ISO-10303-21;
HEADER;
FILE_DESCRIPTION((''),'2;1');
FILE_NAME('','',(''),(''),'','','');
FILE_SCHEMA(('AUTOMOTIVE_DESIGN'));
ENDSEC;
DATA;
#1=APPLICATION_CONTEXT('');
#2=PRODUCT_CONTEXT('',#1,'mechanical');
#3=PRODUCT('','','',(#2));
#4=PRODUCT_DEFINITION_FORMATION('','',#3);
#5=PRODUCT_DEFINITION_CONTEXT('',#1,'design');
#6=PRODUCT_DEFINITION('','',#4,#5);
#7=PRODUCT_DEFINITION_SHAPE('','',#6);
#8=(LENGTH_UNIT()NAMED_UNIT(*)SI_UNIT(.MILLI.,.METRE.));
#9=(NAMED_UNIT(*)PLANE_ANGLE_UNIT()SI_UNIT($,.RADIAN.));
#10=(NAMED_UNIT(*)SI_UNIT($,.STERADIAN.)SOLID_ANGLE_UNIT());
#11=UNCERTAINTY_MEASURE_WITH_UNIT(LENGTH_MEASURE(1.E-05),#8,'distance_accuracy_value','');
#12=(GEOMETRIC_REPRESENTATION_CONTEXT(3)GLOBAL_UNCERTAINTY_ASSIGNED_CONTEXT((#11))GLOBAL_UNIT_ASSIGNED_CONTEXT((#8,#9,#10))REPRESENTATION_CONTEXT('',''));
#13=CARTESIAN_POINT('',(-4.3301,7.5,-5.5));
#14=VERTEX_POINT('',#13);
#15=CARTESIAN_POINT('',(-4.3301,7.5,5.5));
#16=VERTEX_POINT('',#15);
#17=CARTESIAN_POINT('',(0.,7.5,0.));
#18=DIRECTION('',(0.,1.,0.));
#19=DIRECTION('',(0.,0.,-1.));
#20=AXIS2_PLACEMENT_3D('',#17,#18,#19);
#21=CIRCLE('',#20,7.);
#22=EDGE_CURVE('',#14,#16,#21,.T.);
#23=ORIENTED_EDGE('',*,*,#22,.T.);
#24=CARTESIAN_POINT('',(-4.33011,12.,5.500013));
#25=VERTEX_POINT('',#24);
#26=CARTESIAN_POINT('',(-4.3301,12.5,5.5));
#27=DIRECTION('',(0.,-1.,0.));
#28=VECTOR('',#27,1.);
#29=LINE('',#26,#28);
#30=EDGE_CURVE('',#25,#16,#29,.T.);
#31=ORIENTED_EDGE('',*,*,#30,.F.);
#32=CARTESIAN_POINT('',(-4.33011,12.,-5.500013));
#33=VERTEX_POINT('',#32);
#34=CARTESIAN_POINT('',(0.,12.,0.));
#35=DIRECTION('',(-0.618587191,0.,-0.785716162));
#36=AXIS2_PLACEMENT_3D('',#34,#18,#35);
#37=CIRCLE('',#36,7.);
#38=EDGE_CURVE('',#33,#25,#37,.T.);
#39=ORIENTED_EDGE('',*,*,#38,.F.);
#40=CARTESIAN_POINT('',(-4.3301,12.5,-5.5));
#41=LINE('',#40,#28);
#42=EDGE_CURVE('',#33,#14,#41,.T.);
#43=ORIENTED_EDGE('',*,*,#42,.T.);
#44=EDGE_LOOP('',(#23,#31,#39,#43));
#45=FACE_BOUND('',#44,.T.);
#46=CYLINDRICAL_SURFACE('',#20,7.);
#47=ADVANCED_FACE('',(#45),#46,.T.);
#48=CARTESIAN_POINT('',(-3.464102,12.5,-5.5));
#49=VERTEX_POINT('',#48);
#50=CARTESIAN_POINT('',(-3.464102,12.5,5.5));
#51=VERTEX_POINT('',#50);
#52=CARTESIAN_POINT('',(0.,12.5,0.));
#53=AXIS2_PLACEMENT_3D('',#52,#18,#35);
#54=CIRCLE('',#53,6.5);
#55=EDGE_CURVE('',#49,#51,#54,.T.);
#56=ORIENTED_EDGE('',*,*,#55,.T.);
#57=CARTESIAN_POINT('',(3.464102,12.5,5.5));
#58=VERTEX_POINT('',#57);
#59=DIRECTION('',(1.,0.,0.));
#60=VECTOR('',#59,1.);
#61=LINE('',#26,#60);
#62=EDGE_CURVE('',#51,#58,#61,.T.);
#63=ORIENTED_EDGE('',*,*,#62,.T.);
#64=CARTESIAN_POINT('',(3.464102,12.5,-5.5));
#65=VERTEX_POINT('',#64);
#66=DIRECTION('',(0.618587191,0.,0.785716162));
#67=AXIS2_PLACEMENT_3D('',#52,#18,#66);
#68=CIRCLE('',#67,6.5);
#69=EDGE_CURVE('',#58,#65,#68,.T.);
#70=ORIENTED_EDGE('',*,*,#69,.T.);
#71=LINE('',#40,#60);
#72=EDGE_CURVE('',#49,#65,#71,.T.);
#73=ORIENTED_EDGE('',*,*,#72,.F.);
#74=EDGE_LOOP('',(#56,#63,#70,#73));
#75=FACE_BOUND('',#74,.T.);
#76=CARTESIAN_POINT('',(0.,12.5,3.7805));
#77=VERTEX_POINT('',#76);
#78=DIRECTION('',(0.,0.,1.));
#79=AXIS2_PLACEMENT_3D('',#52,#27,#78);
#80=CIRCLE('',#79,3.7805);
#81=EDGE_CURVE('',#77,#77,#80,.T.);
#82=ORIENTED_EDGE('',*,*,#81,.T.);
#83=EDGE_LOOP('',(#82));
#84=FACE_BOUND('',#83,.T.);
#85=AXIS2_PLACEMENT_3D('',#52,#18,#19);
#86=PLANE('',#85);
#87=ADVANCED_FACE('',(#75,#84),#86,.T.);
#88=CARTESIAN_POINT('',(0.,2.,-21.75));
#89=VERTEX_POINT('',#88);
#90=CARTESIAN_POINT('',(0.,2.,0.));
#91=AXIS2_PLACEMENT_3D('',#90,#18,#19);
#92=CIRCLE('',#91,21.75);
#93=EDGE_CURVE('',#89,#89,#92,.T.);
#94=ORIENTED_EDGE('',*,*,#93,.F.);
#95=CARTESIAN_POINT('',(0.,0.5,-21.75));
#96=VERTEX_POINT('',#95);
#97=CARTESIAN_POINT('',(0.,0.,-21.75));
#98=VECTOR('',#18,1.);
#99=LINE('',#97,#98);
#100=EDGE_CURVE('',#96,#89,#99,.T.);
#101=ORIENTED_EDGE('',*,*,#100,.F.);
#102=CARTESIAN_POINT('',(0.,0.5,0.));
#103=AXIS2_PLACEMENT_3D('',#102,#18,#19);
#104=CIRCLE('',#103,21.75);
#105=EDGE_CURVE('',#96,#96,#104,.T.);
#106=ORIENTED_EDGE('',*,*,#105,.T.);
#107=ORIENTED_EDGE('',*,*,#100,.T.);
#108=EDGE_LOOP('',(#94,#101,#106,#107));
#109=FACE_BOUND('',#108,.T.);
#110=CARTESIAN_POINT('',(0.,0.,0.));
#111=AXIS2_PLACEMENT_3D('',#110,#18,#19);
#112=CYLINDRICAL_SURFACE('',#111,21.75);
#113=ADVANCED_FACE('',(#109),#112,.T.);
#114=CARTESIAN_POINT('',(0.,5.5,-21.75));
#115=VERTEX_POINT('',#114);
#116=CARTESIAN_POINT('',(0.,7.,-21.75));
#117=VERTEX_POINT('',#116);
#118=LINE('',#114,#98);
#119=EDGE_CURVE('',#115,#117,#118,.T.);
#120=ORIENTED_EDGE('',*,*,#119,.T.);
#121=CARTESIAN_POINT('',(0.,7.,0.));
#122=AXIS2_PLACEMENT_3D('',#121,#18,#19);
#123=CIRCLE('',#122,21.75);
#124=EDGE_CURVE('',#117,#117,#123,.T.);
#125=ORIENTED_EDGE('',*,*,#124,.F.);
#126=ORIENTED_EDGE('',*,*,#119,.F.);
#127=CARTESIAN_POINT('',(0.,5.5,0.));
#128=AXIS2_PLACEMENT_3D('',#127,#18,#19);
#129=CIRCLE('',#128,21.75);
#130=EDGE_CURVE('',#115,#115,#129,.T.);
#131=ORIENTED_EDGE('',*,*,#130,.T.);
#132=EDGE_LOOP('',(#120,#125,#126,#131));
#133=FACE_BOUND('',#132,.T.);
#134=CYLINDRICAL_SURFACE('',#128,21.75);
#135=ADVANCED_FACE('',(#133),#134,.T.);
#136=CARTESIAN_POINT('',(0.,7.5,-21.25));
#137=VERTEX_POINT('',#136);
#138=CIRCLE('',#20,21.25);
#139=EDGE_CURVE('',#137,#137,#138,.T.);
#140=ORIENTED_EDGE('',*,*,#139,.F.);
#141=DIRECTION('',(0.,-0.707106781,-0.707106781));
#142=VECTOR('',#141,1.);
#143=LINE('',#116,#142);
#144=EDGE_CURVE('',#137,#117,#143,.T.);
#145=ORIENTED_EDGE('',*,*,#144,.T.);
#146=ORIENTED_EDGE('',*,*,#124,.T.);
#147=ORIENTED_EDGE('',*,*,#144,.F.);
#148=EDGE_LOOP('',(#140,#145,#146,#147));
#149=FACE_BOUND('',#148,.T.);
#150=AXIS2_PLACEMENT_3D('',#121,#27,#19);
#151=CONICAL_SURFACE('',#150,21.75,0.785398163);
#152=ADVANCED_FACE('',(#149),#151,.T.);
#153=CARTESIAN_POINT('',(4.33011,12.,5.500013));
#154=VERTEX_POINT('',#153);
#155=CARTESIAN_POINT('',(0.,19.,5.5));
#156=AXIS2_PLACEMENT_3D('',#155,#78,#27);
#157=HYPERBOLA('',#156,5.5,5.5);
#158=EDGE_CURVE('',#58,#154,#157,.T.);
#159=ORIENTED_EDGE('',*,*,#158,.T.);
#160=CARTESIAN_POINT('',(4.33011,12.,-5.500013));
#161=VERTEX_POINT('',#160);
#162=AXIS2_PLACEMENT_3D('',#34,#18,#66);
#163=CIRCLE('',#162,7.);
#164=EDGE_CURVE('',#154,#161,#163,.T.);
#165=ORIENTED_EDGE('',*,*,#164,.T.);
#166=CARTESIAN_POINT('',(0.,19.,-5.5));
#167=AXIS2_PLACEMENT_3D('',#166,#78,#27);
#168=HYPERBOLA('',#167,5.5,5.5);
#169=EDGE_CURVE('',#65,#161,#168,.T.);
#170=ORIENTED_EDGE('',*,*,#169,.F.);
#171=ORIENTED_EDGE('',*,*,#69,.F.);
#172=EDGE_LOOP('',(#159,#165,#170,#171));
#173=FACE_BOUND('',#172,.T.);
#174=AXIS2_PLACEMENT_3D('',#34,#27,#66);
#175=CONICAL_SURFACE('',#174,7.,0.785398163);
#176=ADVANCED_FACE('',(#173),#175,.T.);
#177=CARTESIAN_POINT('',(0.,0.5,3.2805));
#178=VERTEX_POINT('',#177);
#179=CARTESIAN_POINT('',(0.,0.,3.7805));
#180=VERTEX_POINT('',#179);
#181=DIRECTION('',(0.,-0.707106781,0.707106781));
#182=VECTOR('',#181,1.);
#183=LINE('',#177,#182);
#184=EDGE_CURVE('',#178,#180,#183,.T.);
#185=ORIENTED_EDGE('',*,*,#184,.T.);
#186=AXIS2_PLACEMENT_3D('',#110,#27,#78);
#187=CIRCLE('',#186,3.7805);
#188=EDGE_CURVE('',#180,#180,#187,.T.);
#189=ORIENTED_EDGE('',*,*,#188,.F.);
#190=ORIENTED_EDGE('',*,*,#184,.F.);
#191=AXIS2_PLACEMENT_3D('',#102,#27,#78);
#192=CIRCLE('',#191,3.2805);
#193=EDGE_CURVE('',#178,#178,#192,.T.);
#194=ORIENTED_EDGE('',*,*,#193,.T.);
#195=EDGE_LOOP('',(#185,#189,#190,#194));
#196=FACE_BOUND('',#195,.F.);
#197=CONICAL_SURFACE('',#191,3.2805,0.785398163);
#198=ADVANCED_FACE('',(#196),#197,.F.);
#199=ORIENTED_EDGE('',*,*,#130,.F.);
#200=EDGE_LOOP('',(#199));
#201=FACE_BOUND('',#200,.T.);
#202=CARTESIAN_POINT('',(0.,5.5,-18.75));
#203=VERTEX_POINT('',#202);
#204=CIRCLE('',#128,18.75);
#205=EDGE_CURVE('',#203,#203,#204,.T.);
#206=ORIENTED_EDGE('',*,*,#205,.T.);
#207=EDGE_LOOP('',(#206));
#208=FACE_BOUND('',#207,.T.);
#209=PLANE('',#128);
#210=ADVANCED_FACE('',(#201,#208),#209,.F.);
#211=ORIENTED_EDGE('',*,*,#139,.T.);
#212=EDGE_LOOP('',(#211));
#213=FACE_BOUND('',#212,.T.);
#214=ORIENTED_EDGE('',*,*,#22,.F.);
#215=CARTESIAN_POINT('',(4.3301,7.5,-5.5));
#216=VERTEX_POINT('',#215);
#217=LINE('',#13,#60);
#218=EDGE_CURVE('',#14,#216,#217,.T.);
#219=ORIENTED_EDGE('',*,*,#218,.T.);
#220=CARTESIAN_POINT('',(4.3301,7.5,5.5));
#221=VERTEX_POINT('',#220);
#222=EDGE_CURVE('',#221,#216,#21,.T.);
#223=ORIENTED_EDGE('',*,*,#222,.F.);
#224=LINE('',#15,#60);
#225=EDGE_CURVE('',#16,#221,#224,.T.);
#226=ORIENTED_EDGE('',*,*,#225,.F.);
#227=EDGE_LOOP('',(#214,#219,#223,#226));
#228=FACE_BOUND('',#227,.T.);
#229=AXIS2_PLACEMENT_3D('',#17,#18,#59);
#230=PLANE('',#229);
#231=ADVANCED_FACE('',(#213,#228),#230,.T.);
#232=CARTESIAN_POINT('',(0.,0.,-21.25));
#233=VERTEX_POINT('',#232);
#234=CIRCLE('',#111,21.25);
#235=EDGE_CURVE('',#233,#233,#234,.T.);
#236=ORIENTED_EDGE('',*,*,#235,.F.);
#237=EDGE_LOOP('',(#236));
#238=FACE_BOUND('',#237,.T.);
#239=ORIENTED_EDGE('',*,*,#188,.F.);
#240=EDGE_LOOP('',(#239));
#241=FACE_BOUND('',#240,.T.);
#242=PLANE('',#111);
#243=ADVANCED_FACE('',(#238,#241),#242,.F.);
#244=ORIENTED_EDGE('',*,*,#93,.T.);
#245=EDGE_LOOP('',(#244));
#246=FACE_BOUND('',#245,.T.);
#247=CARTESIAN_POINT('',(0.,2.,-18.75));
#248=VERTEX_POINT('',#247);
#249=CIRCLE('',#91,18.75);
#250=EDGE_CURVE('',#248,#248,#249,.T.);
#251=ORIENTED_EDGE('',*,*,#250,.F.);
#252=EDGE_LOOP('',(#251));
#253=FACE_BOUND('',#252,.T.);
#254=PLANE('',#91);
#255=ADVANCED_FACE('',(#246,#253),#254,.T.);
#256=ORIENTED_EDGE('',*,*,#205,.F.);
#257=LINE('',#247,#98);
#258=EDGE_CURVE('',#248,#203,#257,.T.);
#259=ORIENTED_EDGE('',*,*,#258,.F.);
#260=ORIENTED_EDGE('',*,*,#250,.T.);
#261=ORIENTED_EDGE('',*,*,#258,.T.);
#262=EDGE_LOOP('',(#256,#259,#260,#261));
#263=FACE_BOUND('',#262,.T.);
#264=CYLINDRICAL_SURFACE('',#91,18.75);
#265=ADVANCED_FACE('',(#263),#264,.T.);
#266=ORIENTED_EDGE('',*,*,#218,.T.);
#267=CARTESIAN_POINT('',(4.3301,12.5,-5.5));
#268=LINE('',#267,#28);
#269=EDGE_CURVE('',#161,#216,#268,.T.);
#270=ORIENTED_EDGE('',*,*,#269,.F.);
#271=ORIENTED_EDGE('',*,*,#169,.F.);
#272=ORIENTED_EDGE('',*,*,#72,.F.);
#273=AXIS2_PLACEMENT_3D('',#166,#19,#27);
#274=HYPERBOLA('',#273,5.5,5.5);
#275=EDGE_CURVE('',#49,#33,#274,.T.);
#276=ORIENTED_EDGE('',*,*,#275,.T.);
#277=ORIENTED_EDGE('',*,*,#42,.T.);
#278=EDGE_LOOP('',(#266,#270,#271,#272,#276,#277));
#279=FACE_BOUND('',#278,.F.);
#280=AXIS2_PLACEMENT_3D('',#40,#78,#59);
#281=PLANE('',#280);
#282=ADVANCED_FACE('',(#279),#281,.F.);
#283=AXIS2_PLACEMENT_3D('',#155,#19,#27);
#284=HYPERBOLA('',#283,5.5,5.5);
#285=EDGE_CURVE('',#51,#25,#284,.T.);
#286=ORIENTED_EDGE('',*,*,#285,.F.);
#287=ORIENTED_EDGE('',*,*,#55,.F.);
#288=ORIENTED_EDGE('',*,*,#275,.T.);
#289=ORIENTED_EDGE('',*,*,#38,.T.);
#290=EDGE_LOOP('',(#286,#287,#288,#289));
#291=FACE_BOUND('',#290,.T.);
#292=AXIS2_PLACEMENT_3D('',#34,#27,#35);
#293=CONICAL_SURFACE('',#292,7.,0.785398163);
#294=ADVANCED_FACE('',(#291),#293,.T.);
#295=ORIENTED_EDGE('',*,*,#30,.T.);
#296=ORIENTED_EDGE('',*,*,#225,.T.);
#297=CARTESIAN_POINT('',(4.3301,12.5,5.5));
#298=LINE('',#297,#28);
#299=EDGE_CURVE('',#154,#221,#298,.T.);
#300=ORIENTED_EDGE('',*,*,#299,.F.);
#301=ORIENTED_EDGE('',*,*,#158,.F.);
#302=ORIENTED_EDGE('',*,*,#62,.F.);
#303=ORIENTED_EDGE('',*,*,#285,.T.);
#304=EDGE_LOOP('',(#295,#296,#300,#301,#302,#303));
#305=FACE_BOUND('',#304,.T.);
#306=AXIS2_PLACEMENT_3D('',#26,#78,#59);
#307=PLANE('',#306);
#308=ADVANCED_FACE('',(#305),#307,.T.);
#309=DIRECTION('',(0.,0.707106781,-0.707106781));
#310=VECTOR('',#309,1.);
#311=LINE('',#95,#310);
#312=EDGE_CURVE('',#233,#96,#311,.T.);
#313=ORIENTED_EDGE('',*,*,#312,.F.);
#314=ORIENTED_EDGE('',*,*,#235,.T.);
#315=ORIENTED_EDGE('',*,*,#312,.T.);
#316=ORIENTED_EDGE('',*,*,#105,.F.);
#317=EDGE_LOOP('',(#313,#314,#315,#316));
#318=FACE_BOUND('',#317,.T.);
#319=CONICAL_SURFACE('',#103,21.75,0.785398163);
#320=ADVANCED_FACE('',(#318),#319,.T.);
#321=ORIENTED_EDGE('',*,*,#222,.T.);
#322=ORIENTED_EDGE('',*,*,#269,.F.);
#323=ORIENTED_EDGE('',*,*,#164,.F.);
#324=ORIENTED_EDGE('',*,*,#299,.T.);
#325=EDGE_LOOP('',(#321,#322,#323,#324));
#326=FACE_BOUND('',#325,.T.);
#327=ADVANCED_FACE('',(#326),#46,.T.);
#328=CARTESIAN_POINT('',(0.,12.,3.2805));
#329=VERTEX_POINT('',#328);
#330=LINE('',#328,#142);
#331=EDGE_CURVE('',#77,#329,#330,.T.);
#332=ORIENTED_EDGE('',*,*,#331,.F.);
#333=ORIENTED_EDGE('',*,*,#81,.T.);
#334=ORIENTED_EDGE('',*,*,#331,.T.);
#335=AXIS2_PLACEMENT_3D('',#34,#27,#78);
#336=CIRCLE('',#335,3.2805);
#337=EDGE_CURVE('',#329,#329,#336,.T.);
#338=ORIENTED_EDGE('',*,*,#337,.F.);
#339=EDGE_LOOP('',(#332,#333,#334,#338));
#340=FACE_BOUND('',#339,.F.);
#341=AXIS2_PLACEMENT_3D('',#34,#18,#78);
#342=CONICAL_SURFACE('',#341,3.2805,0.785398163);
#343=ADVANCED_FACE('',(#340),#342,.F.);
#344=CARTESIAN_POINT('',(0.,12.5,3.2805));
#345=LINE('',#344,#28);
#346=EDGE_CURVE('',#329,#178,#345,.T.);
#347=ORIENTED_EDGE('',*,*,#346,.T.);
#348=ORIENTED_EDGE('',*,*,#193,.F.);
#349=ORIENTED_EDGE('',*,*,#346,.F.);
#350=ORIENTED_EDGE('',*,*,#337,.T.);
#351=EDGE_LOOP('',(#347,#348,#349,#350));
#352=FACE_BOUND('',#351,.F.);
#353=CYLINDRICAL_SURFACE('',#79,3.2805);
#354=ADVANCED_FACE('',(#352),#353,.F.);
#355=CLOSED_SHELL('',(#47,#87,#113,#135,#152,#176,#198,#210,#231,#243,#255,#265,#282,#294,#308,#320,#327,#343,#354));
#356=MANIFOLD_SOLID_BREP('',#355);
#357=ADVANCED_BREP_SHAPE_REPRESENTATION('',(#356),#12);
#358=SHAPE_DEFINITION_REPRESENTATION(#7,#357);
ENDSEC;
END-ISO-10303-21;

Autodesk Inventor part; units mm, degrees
ref_plane "YZ Plane" through (0, 0, 0) normal (1, 0, 0) x (0, 1, 0)
ref_plane "XZ Plane" through (0, 0, 0) normal (0, 1, 0) x (-1, 0, 0)
ref_plane "XY Plane" through (0, 0, 0) normal (0, 0, 1) x (1, 0, 0)
sketch "Sketch6" plane through (0, 0, 0) normal (1, 0, 0) x (0, 1, 0)
  line L0 (0, 0) -> (12.5, 0)
  line L1 (0, 0) -> (0, -21.75)
  line L2 (0, -21.75) -> (2, -21.75)
  line L3 (2, -21.75) -> (2, -18.75)
  line L4 (2, -18.75) -> (5.5, -18.75)
  line L5 (5.5, -18.75) -> (5.5, -21.75)
  line L6 (5.5, -21.75) -> (7.5, -21.75)
  line L7 (7.5, -21.75) -> (7.5, -7)
  line L8 (7.5, -7) -> (12.5, -7)
  line L9 (12.5, -7) -> (12.5, 0)
  point P0 (6.25, 0)
  dimension "d28" = 43.5
  dimension "d29" = 14
  dimension "d30" = 5
  dimension "d31" = 7
  dimension "d33" = 3.5
  dimension "d35" = 12.5
  dimension "d36" = 37.5
revolve "Revolution3" add sketch "Sketch6" angle 360 about axis through (0, 0, 0) along (0, 1, 0)
hole "Hole2" at (0, 12.5, 0) direction (0, -1, 0) diameter 6.561 end through all thread size "G 1/16-28" standard "BSP Pipe Threads"
sketch "Sketch7" plane through (0, 12.5, 0) normal (0, 1, 0) x (1, 0, 0)
  circle A0 centre (0, 0) radius 7 construction
  line L0 (-4.3301, -5.5) -> (4.3301, -5.5)
  line L1 (7, 0) -> (-7, 0)
  line L2 (-4.3301, 5.5) -> (4.3301, 5.5)
  arc A1 (-4.3301, -5.5) -> (4.3301, -5.5) centre (0, 0) ccw
  arc A2 (4.3301, 5.5) -> (-4.3301, 5.5) centre (0, 0) ccw
  dimension "d49" = 11
extrude "Extrusion2" cut sketch "Sketch7" against normal up to surface (5 mm away)
chamfer "Chamfer5" distance 0.5 angle 45 6 edges at (0, 0, 21.75) (0, 7.5, 21.75) (7, 12.5, 0) (-7, 12.5, 0) (0, 0, -3.2805) (0, 12.5, -3.2805)
properties part number "Endcap" material "Steel"
